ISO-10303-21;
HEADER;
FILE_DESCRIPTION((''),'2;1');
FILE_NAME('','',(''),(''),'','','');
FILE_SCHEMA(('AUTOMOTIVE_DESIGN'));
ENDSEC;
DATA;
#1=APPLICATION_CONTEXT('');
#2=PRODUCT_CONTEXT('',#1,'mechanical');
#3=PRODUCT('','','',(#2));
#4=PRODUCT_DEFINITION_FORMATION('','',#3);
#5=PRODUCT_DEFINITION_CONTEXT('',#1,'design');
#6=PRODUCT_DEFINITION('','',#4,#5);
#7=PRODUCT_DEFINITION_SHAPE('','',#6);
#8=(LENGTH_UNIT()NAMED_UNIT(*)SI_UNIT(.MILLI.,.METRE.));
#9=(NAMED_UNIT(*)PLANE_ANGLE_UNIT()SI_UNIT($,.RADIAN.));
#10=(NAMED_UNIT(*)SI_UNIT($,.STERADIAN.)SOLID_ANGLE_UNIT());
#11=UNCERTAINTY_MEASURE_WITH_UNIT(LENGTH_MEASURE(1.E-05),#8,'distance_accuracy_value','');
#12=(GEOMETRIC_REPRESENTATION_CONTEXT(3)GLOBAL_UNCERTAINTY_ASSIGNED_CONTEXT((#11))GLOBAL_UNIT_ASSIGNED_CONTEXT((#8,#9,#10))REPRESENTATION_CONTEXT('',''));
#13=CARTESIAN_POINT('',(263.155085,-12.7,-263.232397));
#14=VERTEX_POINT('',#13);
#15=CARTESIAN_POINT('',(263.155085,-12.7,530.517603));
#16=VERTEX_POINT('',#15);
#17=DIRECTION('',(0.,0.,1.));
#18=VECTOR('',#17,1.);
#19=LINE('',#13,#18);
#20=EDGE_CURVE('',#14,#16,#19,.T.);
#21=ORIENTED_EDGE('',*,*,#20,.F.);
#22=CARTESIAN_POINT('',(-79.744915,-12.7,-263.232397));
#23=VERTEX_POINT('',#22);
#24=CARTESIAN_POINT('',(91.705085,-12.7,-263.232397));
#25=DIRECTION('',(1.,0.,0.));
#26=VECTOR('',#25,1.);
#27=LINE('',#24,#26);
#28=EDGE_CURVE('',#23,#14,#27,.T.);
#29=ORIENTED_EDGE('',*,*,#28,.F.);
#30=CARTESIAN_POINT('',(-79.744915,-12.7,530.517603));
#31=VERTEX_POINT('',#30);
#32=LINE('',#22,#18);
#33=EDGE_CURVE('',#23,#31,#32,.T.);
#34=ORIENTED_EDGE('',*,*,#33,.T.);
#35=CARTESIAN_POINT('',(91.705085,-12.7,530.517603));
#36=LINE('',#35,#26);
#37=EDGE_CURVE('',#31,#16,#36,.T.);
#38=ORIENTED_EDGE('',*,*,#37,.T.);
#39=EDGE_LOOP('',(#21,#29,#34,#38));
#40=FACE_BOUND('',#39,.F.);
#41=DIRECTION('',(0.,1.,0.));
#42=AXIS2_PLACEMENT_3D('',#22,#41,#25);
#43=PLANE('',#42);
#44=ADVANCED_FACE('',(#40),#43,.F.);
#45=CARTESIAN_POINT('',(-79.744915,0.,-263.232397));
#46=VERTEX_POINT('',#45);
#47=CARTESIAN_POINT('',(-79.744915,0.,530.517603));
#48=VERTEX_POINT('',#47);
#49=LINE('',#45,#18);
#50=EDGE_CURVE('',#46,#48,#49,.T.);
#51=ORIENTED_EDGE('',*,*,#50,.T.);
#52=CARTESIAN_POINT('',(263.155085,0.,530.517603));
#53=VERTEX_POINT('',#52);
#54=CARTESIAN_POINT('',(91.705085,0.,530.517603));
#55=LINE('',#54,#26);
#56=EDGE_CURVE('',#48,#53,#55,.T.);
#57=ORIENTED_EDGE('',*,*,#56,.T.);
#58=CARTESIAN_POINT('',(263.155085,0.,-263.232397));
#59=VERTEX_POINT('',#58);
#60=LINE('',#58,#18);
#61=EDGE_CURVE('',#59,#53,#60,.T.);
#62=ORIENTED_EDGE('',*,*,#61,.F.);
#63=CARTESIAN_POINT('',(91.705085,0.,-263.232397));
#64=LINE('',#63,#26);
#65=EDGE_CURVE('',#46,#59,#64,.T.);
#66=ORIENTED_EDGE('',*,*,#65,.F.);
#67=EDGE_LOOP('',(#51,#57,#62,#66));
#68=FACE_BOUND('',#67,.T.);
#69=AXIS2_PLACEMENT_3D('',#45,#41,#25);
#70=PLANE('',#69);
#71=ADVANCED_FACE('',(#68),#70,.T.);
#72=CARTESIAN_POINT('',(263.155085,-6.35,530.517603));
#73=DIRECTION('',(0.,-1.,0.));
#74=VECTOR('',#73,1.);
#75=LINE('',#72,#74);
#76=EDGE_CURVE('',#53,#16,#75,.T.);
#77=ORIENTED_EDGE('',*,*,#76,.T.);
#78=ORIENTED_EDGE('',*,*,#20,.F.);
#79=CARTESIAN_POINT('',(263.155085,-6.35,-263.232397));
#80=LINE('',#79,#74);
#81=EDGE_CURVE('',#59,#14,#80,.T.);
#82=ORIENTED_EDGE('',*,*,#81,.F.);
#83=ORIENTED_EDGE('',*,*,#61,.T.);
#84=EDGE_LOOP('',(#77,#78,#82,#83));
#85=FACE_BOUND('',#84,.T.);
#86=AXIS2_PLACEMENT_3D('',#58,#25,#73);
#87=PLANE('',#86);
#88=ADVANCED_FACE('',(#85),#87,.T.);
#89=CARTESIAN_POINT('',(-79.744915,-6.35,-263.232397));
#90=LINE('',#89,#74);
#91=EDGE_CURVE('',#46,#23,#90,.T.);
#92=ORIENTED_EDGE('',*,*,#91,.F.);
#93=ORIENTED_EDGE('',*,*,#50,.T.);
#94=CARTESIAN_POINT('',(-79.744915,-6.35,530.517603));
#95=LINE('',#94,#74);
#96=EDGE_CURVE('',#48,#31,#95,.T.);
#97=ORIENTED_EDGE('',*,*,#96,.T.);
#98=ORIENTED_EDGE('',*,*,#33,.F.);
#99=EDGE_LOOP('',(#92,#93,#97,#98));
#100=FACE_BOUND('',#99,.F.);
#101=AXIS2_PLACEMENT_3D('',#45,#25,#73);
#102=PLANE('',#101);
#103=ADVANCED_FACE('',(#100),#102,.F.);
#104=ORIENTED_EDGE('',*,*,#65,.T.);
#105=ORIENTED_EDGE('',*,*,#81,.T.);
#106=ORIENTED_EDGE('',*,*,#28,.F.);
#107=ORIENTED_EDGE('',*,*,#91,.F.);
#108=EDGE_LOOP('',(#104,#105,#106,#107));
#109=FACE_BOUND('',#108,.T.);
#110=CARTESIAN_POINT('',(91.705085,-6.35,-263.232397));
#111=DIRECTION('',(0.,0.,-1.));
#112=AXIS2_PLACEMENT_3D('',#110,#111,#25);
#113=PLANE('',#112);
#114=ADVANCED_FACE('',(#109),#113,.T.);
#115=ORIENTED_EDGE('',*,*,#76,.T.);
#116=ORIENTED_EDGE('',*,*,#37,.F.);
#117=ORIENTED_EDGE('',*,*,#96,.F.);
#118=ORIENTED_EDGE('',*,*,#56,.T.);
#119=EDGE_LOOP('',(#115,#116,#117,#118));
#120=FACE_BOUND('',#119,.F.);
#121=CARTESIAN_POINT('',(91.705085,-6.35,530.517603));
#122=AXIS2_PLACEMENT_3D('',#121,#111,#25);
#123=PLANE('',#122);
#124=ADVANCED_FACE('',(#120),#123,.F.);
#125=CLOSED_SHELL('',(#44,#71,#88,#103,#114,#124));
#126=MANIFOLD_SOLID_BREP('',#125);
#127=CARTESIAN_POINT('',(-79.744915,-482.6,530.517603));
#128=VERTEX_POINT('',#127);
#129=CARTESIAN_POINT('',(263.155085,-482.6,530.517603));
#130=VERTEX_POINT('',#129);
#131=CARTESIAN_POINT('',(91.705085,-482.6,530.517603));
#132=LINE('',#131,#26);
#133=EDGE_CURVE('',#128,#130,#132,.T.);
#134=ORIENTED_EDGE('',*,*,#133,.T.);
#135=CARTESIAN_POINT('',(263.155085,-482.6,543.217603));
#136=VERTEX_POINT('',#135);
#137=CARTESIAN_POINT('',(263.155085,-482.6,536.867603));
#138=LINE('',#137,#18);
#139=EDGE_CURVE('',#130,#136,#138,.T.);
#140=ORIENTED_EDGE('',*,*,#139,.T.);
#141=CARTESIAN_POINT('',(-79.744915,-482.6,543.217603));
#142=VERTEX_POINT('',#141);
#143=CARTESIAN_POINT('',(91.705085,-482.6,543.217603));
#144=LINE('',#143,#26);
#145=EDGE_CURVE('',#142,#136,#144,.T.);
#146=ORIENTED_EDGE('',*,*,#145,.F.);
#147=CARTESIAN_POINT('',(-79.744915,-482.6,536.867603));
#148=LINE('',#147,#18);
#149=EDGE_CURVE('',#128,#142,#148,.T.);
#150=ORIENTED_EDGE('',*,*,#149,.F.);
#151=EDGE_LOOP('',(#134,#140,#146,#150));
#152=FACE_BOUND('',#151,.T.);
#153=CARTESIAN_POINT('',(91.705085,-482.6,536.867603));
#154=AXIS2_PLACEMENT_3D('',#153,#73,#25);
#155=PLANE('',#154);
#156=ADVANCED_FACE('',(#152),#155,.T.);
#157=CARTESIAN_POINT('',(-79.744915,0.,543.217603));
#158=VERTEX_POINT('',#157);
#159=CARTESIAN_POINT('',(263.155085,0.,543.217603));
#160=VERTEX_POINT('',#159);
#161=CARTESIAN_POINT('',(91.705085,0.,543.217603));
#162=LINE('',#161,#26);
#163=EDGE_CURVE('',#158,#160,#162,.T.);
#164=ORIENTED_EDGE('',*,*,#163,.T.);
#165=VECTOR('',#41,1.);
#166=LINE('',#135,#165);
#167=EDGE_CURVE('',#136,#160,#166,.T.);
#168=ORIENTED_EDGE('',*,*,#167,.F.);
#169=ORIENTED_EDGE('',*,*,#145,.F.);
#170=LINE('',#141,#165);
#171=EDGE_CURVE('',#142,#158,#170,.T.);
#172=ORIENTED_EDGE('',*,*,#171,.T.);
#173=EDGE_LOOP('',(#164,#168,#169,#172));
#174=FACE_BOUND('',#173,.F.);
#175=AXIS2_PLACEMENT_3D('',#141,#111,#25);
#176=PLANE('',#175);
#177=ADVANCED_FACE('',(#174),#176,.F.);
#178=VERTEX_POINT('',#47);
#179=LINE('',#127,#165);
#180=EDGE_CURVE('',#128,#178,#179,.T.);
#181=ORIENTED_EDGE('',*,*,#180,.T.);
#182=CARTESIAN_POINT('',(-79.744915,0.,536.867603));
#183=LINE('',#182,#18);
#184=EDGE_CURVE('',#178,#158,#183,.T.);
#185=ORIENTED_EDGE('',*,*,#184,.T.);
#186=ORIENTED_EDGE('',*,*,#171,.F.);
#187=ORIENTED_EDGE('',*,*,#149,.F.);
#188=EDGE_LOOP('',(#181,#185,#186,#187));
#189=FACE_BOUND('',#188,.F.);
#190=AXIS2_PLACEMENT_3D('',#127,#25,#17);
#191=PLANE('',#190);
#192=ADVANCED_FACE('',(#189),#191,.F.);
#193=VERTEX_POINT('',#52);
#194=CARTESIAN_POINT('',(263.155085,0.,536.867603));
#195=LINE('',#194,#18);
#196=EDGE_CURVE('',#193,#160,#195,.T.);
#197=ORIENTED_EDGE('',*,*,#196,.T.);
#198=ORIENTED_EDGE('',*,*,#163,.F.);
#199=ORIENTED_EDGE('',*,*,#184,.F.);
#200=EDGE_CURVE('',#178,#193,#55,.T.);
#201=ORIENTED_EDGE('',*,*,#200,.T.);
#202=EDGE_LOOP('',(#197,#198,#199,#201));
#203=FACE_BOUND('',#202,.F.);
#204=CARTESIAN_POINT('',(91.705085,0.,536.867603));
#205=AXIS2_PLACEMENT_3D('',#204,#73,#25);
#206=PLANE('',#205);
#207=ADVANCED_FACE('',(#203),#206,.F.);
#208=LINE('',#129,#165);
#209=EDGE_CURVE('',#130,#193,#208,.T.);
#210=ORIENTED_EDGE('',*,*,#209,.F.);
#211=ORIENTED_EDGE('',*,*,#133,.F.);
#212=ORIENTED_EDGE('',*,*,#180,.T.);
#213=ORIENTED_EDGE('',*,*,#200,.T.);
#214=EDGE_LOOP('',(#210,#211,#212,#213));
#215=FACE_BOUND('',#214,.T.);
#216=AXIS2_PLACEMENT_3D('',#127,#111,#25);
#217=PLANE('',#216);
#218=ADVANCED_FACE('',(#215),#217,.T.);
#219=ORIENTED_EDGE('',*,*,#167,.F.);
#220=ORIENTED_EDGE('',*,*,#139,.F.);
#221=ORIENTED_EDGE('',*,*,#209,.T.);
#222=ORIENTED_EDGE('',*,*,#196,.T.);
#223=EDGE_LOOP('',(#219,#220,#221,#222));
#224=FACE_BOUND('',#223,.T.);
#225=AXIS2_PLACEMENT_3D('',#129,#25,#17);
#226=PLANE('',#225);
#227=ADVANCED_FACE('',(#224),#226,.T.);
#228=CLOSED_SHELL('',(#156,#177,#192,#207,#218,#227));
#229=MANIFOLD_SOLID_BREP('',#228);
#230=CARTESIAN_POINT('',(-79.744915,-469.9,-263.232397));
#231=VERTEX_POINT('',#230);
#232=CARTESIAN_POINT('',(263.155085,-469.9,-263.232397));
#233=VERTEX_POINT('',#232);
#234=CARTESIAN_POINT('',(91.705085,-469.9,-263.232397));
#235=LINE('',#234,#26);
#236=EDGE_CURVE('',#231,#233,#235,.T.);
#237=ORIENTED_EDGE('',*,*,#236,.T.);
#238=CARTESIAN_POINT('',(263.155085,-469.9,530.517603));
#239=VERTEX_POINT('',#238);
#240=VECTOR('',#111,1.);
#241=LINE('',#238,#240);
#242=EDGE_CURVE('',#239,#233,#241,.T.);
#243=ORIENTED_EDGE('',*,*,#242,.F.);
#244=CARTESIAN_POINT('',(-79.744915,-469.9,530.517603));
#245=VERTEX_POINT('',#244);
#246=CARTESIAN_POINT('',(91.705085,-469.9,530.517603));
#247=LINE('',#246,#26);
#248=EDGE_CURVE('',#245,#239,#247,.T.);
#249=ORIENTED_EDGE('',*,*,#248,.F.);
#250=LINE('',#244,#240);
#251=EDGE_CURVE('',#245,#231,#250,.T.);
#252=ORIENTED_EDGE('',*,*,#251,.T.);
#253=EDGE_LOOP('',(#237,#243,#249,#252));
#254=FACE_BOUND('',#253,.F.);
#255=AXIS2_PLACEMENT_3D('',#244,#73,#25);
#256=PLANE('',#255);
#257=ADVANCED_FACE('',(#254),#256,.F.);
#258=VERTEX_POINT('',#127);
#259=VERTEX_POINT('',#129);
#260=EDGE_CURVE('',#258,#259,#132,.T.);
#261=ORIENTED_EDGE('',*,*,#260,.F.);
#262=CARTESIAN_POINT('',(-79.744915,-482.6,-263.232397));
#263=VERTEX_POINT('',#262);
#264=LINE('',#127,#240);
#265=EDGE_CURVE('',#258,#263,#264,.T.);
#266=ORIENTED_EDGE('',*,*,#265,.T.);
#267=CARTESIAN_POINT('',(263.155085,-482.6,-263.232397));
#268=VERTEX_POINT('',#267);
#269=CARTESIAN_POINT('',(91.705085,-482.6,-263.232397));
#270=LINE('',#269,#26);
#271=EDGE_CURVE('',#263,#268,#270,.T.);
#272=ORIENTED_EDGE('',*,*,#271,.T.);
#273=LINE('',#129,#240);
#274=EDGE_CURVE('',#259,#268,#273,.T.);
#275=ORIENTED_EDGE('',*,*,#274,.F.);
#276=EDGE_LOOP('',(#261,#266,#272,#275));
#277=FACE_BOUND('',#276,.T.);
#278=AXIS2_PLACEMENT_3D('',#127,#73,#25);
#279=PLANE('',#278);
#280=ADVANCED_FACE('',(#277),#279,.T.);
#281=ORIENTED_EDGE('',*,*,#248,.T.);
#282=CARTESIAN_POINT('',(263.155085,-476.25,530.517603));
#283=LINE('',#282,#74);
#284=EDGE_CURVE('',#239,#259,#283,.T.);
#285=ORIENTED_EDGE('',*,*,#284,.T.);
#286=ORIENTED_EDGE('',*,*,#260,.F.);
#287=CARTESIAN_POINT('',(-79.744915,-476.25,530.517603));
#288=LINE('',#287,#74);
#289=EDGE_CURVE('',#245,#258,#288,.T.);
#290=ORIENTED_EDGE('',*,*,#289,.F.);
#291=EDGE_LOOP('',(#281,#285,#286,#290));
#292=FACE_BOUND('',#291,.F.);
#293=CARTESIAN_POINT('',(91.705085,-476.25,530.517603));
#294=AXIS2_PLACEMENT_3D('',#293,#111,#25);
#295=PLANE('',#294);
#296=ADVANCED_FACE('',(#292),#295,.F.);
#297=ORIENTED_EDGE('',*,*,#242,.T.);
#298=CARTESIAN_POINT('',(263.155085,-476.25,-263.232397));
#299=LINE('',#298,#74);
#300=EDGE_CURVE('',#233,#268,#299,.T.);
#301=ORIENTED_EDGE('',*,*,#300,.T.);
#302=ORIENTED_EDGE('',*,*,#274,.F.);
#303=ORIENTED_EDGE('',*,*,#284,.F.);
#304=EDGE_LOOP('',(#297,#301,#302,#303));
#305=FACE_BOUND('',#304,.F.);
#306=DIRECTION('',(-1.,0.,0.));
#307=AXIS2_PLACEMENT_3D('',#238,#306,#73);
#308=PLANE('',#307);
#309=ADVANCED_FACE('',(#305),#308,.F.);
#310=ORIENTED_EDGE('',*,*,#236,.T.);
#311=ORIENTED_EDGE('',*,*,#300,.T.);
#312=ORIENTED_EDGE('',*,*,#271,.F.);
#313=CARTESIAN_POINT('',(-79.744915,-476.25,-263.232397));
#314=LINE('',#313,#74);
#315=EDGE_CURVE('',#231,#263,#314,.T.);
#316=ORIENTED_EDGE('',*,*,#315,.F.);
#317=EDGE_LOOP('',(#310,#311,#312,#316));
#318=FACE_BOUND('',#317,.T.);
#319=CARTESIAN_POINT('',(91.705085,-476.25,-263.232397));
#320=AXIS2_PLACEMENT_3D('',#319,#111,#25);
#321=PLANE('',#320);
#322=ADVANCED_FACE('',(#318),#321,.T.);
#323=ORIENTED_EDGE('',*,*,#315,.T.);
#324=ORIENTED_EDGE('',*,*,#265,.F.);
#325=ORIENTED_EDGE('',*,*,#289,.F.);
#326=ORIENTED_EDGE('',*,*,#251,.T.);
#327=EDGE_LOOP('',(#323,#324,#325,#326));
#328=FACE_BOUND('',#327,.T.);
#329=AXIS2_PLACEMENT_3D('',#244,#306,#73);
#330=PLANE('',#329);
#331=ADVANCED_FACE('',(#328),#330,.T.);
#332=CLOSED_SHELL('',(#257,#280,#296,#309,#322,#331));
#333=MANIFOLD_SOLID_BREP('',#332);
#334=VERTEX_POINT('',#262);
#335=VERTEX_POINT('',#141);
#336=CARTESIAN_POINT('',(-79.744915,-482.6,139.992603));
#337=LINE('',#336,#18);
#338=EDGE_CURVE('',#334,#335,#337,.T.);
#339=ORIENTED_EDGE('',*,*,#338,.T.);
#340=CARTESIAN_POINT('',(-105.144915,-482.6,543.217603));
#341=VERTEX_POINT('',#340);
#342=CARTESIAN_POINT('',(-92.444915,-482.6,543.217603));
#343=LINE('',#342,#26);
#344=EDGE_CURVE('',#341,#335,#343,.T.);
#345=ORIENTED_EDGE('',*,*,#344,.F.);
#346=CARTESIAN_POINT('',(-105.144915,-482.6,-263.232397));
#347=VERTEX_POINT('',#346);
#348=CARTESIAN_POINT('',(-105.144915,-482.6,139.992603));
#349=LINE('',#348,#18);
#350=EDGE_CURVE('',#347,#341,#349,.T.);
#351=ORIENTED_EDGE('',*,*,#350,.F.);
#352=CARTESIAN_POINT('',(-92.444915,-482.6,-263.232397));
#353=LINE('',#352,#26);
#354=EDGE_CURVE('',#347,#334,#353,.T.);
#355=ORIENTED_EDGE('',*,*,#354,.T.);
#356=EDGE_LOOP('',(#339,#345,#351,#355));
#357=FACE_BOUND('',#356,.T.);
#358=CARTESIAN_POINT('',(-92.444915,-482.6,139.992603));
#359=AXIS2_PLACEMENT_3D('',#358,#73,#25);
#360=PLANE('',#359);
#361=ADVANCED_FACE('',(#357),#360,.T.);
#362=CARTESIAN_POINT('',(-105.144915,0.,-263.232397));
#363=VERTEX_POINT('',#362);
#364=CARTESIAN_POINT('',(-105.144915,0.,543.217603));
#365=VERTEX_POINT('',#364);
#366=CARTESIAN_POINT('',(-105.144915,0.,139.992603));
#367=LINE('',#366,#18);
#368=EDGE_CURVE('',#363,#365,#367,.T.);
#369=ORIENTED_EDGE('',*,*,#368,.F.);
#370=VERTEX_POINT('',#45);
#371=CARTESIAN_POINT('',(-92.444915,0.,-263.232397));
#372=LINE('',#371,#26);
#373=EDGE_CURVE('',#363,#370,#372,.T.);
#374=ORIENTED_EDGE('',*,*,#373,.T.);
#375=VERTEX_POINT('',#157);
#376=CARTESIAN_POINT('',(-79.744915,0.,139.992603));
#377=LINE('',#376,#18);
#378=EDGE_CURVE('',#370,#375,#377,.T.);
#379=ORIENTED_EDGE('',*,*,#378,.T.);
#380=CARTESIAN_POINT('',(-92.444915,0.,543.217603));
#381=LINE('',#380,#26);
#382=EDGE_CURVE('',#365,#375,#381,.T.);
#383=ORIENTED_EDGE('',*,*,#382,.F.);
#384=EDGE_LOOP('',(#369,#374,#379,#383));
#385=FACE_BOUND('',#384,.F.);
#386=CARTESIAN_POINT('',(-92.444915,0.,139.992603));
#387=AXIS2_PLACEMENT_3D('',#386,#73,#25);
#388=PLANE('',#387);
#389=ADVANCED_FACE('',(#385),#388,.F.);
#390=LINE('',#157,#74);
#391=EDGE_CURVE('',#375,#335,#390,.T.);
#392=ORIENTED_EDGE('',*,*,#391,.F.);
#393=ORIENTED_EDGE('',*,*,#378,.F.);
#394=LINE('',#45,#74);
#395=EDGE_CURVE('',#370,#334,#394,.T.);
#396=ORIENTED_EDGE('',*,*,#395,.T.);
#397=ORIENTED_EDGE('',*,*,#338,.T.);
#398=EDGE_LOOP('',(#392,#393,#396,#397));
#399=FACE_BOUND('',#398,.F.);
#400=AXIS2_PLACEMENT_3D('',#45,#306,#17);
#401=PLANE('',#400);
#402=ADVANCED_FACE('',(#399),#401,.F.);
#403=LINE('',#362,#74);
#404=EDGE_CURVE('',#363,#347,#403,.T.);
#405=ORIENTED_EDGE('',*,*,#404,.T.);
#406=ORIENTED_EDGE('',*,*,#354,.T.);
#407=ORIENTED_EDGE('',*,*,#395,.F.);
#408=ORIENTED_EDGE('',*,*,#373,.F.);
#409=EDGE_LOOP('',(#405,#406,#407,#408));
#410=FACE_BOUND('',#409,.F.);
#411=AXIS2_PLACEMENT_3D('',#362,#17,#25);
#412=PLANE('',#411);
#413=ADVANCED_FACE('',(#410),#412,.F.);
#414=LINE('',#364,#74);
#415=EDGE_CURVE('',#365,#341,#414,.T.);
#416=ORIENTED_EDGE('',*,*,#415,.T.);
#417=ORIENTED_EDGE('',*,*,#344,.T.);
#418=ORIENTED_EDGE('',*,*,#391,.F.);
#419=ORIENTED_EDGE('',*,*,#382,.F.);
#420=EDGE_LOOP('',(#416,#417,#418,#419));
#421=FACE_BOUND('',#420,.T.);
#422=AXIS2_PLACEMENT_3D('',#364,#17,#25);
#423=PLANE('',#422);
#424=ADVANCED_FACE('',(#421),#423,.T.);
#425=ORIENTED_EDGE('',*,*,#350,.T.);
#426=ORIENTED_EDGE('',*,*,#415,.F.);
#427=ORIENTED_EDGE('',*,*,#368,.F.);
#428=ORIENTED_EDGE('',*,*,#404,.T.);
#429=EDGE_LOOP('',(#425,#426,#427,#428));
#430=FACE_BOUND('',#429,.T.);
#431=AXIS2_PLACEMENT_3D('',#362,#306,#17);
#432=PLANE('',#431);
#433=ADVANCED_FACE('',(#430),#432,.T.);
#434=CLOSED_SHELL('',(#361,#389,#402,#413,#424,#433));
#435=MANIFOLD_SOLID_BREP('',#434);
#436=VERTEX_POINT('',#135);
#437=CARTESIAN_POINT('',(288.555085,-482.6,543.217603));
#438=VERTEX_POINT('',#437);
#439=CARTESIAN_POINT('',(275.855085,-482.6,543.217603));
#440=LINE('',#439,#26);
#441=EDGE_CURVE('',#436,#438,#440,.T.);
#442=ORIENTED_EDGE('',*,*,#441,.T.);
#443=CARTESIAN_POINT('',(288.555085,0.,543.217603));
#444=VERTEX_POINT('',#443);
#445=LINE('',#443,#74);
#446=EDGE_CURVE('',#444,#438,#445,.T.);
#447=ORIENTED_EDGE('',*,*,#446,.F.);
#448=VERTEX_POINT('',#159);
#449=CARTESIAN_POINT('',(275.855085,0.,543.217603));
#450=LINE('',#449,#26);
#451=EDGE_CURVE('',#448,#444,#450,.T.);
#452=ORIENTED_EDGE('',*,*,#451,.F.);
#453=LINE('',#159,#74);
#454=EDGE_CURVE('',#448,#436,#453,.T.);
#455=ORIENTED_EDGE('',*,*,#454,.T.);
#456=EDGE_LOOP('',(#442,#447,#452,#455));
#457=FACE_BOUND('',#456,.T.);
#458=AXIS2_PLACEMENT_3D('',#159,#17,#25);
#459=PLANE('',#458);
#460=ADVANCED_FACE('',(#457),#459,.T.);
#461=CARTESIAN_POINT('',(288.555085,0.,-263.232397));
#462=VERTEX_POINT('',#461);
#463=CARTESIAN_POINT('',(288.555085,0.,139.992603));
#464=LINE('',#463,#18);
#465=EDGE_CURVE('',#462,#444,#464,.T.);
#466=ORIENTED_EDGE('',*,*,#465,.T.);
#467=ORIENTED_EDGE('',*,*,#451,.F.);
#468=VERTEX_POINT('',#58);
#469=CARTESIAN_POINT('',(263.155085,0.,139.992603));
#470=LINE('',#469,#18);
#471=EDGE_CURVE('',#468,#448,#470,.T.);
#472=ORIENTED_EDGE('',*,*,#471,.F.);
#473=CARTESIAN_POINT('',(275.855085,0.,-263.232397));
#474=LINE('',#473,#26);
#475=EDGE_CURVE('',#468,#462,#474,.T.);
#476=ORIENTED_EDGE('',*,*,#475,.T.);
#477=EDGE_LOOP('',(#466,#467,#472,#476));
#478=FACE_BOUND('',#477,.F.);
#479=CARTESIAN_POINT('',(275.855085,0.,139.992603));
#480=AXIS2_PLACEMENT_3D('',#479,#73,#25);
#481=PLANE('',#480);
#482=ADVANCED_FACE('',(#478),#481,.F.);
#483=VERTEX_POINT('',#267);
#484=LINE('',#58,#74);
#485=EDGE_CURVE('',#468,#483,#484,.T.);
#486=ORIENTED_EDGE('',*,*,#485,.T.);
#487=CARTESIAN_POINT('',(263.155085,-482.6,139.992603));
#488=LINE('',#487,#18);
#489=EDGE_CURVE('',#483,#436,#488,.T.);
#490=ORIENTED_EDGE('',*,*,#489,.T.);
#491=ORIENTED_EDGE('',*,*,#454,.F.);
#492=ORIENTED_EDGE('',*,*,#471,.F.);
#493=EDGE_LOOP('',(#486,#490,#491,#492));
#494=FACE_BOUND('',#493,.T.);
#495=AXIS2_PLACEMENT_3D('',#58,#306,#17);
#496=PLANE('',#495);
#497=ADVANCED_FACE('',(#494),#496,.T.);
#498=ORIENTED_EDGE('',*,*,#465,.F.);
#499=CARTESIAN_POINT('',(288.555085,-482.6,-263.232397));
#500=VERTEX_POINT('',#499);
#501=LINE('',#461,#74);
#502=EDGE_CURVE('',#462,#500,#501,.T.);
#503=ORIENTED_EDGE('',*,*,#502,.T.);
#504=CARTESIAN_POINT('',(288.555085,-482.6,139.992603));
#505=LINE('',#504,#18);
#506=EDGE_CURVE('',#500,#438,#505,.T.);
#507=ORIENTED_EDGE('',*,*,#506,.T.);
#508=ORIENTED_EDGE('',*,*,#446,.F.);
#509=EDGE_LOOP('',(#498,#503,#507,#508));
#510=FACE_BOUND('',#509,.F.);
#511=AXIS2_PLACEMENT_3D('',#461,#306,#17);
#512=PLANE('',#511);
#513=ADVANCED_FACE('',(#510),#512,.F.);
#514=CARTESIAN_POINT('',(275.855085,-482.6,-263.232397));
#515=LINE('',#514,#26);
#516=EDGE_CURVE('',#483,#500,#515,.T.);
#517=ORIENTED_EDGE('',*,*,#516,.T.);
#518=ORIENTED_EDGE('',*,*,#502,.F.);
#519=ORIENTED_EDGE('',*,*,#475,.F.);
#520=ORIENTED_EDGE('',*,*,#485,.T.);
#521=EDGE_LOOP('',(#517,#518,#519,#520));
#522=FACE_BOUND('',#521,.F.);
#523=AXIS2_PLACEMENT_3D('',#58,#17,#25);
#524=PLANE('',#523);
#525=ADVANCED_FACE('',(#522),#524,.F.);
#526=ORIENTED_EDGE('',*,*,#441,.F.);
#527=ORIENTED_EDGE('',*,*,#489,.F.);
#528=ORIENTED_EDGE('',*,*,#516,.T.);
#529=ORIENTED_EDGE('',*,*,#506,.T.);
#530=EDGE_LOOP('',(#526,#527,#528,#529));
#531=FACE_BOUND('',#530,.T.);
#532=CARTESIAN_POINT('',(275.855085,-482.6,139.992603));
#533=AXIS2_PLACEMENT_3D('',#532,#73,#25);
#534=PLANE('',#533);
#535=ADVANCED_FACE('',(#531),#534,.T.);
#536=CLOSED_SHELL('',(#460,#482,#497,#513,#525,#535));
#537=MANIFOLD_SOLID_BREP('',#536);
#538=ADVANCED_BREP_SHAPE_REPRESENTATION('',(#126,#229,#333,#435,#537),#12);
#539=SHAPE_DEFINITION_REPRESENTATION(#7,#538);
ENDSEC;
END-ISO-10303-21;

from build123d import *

# Parameters (mm, degrees)
F1_W     = 25.4
F1_H     = 806.45
F2_DEPTH = 482.6
F3_W     = 342.9
F3_H     = 12.7
F4_DEPTH = 482.6
F5_W     = 342.9
F5_H     = 12.7
F6_DEPTH = 793.75
F7_W     = 342.9
F7_H     = 12.7
F8_DEPTH = 793.75


# Not quite as in the source:
# - a feature of the source that left no trace in its solid (it failed there, or was rolled back) is left out


with BuildPart() as f2:
    # F1 (on face) → F2 (new body)
    with BuildSketch(Plane.XZ):
        with Locations((-92.4449153244, 139.9926033994)):
            Rectangle(F1_W, F1_H)
    extrude(amount=F2_DEPTH)


with BuildPart() as f2b:
    # F1 (on face) → F2, piece 2 (new body)
    with BuildSketch(Plane.XZ):
        with Locations((275.8550846756, 139.9926033994)):
            Rectangle(F1_W, F1_H)
    extrude(amount=F2_DEPTH)


with BuildPart() as f4:
    # F3 (on face) → F4 (new body, through all)
    with BuildSketch(Plane.XZ.offset(482.6)):
        with Locations((91.7050846756, 536.8676033994)):
            Rectangle(F3_W, F3_H)
    extrude(amount=-F4_DEPTH)


with BuildPart() as f6:
    # F5 (on face) → F6 (new body, through all)
    with BuildSketch(Plane(origin=(0, 0, -263.2323966006), x_dir=(1, 0, 0), z_dir=(0, 0, -1))):
        with Locations((91.7050846756, 6.35)):
            Rectangle(F5_W, F5_H)
    extrude(amount=-F6_DEPTH)


with BuildPart() as f8:
    # F7 (on face) → F8 (new body, through all)
    with BuildSketch(Plane(origin=(0, 0, 530.5176033994), x_dir=(1, 0, 0), z_dir=(0, 0, -1))):
        with Locations((91.7050846756, 476.25)):
            Rectangle(F7_W, F7_H)
    extrude(amount=F8_DEPTH)


solid = Compound([f2.part, f2b.part, f4.part, f6.part, f8.part])
